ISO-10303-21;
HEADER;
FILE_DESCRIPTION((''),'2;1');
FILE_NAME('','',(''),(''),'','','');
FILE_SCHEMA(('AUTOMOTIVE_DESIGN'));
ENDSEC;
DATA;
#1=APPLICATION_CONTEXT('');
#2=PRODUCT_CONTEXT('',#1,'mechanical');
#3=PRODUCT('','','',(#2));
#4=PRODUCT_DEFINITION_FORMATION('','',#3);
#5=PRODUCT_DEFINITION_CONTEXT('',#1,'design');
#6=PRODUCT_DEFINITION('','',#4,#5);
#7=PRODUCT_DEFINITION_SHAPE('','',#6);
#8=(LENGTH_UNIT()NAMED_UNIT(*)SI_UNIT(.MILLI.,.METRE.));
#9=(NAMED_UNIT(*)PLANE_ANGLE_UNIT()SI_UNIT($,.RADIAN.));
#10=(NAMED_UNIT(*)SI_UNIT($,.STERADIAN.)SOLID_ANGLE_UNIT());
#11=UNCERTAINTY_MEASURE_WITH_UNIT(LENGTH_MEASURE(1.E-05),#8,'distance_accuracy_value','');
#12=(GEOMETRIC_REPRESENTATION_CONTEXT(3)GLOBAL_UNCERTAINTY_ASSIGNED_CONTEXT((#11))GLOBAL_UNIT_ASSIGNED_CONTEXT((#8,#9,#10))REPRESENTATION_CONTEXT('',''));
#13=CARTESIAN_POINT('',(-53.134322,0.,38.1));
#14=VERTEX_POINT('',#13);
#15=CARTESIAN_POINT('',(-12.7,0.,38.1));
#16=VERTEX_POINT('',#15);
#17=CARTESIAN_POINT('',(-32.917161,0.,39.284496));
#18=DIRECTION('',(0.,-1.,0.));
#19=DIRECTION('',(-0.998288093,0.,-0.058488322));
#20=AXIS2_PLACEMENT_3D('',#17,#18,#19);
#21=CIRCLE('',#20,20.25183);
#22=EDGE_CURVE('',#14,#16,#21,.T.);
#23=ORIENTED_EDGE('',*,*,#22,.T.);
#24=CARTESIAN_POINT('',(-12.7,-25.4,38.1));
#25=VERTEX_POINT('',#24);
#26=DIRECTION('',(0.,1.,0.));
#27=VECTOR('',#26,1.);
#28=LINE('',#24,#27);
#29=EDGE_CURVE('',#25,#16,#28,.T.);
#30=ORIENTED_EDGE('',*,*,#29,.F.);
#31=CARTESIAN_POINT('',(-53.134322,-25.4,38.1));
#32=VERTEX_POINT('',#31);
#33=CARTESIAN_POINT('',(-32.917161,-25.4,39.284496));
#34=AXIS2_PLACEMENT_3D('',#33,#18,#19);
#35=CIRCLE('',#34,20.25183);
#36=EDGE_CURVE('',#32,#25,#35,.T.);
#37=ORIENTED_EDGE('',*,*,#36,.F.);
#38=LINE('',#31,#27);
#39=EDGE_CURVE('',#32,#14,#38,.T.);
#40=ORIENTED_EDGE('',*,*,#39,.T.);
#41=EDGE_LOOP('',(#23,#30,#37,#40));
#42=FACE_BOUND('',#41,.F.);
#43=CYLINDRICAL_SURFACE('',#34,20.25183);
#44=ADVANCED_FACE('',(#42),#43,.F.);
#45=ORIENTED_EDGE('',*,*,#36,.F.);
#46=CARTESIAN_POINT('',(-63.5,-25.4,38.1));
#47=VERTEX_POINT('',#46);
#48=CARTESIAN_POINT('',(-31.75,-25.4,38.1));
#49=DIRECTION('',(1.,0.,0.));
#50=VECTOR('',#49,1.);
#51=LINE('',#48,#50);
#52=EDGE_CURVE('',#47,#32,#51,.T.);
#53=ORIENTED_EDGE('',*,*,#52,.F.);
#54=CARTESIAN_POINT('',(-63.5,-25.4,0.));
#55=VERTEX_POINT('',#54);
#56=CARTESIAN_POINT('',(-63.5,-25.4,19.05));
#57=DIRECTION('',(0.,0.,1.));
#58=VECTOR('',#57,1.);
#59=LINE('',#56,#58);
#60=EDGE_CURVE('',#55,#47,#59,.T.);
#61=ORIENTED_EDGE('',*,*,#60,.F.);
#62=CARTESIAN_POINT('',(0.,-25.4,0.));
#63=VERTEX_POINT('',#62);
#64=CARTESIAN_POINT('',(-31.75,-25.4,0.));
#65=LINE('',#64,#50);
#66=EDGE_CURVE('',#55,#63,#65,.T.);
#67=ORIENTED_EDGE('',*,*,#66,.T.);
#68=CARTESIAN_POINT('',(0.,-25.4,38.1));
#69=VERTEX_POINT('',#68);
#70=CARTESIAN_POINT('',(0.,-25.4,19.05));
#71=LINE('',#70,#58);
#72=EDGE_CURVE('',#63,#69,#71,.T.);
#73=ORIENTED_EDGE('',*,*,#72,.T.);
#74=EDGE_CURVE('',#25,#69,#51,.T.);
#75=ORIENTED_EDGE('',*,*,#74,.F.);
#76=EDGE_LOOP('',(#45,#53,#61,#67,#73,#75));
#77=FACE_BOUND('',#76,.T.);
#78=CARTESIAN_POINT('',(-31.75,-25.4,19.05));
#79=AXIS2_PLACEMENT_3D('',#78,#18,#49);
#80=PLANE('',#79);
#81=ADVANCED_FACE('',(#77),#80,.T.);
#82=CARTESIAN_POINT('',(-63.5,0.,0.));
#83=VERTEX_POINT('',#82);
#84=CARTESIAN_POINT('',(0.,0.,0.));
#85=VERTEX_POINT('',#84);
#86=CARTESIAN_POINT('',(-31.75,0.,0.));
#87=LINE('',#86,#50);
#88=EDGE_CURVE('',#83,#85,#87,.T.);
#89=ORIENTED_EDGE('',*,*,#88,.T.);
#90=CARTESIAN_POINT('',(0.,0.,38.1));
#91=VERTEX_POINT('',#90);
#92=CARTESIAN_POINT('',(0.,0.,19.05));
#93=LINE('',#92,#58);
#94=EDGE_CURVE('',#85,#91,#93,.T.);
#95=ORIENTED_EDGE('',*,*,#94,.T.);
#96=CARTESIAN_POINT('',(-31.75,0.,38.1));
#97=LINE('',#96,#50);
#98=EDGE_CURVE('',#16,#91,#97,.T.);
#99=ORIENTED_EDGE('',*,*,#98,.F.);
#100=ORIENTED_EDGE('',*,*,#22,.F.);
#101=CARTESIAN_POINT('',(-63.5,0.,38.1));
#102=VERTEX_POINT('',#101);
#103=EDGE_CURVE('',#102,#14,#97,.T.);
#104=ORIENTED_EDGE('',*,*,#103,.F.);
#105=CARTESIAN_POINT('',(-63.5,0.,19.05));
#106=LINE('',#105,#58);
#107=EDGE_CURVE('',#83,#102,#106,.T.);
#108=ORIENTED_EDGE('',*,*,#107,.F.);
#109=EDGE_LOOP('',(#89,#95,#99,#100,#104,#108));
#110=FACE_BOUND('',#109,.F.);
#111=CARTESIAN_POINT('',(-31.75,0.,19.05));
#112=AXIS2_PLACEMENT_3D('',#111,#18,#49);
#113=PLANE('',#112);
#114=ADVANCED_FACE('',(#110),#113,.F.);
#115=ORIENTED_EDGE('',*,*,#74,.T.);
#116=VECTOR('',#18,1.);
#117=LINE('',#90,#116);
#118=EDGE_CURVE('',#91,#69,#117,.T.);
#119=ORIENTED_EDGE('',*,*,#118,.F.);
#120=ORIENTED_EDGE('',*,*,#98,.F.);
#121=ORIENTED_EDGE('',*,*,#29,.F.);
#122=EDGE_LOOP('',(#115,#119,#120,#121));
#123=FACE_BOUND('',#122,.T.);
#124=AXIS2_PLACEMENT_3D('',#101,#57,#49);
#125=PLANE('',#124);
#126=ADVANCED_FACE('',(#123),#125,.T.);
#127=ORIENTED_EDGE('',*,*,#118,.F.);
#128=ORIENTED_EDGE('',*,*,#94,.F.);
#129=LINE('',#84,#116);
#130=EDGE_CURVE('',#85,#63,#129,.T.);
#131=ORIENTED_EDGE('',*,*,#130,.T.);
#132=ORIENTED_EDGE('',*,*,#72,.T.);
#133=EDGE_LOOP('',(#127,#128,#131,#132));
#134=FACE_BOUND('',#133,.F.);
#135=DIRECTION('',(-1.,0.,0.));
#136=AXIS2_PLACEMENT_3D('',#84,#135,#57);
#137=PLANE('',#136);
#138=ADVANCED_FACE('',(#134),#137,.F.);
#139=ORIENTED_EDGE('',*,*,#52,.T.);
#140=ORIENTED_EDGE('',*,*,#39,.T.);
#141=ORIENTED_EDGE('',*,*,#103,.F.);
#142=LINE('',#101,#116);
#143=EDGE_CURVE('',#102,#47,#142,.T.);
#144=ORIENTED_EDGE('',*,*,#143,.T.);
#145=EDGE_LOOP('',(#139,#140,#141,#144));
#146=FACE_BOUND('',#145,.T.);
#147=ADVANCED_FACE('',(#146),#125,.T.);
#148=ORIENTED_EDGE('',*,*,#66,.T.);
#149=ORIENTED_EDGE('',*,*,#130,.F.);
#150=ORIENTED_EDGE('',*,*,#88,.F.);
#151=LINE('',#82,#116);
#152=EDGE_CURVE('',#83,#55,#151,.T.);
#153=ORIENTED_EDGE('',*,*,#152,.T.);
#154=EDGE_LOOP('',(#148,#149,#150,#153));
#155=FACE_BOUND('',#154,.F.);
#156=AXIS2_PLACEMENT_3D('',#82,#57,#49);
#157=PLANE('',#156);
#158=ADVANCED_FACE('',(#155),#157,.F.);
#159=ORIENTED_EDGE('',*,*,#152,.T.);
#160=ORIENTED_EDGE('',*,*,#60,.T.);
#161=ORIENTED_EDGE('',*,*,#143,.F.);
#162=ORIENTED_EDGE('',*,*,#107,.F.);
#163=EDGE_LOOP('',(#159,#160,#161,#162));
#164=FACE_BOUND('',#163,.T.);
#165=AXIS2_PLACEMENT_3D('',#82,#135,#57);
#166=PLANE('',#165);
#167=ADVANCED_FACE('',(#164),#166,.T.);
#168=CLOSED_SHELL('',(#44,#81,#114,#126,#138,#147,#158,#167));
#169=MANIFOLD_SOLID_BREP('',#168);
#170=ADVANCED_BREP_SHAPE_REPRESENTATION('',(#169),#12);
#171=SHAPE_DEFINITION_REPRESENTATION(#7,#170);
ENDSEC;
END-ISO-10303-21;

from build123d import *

# Parameters (mm, degrees)
F0_W     = 63.5
F0_H     = 38.1
F1_DEPTH = 25.4
F3_DEPTH = 25.401


with BuildPart() as f1:
    # F0 (on Front) → F1 (new body)
    with BuildSketch(Plane.XZ):
        with Locations((-31.75, 19.05)):
            Rectangle(F0_W, F0_H)
    extrude(amount=F1_DEPTH)

    # F2 (on face) → F3 (cut, through all)
    with BuildSketch(Plane.XZ.offset(25.4)):
        with BuildLine():
            Line((-12.7, 38.1), (-53.134321885, 38.1))
            ThreePointArc((-53.134321885, 38.1), (-32.9171609425, 19.0326653727), (-12.7, 38.1))
        make_face()
    extrude(amount=-F3_DEPTH, mode=Mode.SUBTRACT)


solid = f1.part
